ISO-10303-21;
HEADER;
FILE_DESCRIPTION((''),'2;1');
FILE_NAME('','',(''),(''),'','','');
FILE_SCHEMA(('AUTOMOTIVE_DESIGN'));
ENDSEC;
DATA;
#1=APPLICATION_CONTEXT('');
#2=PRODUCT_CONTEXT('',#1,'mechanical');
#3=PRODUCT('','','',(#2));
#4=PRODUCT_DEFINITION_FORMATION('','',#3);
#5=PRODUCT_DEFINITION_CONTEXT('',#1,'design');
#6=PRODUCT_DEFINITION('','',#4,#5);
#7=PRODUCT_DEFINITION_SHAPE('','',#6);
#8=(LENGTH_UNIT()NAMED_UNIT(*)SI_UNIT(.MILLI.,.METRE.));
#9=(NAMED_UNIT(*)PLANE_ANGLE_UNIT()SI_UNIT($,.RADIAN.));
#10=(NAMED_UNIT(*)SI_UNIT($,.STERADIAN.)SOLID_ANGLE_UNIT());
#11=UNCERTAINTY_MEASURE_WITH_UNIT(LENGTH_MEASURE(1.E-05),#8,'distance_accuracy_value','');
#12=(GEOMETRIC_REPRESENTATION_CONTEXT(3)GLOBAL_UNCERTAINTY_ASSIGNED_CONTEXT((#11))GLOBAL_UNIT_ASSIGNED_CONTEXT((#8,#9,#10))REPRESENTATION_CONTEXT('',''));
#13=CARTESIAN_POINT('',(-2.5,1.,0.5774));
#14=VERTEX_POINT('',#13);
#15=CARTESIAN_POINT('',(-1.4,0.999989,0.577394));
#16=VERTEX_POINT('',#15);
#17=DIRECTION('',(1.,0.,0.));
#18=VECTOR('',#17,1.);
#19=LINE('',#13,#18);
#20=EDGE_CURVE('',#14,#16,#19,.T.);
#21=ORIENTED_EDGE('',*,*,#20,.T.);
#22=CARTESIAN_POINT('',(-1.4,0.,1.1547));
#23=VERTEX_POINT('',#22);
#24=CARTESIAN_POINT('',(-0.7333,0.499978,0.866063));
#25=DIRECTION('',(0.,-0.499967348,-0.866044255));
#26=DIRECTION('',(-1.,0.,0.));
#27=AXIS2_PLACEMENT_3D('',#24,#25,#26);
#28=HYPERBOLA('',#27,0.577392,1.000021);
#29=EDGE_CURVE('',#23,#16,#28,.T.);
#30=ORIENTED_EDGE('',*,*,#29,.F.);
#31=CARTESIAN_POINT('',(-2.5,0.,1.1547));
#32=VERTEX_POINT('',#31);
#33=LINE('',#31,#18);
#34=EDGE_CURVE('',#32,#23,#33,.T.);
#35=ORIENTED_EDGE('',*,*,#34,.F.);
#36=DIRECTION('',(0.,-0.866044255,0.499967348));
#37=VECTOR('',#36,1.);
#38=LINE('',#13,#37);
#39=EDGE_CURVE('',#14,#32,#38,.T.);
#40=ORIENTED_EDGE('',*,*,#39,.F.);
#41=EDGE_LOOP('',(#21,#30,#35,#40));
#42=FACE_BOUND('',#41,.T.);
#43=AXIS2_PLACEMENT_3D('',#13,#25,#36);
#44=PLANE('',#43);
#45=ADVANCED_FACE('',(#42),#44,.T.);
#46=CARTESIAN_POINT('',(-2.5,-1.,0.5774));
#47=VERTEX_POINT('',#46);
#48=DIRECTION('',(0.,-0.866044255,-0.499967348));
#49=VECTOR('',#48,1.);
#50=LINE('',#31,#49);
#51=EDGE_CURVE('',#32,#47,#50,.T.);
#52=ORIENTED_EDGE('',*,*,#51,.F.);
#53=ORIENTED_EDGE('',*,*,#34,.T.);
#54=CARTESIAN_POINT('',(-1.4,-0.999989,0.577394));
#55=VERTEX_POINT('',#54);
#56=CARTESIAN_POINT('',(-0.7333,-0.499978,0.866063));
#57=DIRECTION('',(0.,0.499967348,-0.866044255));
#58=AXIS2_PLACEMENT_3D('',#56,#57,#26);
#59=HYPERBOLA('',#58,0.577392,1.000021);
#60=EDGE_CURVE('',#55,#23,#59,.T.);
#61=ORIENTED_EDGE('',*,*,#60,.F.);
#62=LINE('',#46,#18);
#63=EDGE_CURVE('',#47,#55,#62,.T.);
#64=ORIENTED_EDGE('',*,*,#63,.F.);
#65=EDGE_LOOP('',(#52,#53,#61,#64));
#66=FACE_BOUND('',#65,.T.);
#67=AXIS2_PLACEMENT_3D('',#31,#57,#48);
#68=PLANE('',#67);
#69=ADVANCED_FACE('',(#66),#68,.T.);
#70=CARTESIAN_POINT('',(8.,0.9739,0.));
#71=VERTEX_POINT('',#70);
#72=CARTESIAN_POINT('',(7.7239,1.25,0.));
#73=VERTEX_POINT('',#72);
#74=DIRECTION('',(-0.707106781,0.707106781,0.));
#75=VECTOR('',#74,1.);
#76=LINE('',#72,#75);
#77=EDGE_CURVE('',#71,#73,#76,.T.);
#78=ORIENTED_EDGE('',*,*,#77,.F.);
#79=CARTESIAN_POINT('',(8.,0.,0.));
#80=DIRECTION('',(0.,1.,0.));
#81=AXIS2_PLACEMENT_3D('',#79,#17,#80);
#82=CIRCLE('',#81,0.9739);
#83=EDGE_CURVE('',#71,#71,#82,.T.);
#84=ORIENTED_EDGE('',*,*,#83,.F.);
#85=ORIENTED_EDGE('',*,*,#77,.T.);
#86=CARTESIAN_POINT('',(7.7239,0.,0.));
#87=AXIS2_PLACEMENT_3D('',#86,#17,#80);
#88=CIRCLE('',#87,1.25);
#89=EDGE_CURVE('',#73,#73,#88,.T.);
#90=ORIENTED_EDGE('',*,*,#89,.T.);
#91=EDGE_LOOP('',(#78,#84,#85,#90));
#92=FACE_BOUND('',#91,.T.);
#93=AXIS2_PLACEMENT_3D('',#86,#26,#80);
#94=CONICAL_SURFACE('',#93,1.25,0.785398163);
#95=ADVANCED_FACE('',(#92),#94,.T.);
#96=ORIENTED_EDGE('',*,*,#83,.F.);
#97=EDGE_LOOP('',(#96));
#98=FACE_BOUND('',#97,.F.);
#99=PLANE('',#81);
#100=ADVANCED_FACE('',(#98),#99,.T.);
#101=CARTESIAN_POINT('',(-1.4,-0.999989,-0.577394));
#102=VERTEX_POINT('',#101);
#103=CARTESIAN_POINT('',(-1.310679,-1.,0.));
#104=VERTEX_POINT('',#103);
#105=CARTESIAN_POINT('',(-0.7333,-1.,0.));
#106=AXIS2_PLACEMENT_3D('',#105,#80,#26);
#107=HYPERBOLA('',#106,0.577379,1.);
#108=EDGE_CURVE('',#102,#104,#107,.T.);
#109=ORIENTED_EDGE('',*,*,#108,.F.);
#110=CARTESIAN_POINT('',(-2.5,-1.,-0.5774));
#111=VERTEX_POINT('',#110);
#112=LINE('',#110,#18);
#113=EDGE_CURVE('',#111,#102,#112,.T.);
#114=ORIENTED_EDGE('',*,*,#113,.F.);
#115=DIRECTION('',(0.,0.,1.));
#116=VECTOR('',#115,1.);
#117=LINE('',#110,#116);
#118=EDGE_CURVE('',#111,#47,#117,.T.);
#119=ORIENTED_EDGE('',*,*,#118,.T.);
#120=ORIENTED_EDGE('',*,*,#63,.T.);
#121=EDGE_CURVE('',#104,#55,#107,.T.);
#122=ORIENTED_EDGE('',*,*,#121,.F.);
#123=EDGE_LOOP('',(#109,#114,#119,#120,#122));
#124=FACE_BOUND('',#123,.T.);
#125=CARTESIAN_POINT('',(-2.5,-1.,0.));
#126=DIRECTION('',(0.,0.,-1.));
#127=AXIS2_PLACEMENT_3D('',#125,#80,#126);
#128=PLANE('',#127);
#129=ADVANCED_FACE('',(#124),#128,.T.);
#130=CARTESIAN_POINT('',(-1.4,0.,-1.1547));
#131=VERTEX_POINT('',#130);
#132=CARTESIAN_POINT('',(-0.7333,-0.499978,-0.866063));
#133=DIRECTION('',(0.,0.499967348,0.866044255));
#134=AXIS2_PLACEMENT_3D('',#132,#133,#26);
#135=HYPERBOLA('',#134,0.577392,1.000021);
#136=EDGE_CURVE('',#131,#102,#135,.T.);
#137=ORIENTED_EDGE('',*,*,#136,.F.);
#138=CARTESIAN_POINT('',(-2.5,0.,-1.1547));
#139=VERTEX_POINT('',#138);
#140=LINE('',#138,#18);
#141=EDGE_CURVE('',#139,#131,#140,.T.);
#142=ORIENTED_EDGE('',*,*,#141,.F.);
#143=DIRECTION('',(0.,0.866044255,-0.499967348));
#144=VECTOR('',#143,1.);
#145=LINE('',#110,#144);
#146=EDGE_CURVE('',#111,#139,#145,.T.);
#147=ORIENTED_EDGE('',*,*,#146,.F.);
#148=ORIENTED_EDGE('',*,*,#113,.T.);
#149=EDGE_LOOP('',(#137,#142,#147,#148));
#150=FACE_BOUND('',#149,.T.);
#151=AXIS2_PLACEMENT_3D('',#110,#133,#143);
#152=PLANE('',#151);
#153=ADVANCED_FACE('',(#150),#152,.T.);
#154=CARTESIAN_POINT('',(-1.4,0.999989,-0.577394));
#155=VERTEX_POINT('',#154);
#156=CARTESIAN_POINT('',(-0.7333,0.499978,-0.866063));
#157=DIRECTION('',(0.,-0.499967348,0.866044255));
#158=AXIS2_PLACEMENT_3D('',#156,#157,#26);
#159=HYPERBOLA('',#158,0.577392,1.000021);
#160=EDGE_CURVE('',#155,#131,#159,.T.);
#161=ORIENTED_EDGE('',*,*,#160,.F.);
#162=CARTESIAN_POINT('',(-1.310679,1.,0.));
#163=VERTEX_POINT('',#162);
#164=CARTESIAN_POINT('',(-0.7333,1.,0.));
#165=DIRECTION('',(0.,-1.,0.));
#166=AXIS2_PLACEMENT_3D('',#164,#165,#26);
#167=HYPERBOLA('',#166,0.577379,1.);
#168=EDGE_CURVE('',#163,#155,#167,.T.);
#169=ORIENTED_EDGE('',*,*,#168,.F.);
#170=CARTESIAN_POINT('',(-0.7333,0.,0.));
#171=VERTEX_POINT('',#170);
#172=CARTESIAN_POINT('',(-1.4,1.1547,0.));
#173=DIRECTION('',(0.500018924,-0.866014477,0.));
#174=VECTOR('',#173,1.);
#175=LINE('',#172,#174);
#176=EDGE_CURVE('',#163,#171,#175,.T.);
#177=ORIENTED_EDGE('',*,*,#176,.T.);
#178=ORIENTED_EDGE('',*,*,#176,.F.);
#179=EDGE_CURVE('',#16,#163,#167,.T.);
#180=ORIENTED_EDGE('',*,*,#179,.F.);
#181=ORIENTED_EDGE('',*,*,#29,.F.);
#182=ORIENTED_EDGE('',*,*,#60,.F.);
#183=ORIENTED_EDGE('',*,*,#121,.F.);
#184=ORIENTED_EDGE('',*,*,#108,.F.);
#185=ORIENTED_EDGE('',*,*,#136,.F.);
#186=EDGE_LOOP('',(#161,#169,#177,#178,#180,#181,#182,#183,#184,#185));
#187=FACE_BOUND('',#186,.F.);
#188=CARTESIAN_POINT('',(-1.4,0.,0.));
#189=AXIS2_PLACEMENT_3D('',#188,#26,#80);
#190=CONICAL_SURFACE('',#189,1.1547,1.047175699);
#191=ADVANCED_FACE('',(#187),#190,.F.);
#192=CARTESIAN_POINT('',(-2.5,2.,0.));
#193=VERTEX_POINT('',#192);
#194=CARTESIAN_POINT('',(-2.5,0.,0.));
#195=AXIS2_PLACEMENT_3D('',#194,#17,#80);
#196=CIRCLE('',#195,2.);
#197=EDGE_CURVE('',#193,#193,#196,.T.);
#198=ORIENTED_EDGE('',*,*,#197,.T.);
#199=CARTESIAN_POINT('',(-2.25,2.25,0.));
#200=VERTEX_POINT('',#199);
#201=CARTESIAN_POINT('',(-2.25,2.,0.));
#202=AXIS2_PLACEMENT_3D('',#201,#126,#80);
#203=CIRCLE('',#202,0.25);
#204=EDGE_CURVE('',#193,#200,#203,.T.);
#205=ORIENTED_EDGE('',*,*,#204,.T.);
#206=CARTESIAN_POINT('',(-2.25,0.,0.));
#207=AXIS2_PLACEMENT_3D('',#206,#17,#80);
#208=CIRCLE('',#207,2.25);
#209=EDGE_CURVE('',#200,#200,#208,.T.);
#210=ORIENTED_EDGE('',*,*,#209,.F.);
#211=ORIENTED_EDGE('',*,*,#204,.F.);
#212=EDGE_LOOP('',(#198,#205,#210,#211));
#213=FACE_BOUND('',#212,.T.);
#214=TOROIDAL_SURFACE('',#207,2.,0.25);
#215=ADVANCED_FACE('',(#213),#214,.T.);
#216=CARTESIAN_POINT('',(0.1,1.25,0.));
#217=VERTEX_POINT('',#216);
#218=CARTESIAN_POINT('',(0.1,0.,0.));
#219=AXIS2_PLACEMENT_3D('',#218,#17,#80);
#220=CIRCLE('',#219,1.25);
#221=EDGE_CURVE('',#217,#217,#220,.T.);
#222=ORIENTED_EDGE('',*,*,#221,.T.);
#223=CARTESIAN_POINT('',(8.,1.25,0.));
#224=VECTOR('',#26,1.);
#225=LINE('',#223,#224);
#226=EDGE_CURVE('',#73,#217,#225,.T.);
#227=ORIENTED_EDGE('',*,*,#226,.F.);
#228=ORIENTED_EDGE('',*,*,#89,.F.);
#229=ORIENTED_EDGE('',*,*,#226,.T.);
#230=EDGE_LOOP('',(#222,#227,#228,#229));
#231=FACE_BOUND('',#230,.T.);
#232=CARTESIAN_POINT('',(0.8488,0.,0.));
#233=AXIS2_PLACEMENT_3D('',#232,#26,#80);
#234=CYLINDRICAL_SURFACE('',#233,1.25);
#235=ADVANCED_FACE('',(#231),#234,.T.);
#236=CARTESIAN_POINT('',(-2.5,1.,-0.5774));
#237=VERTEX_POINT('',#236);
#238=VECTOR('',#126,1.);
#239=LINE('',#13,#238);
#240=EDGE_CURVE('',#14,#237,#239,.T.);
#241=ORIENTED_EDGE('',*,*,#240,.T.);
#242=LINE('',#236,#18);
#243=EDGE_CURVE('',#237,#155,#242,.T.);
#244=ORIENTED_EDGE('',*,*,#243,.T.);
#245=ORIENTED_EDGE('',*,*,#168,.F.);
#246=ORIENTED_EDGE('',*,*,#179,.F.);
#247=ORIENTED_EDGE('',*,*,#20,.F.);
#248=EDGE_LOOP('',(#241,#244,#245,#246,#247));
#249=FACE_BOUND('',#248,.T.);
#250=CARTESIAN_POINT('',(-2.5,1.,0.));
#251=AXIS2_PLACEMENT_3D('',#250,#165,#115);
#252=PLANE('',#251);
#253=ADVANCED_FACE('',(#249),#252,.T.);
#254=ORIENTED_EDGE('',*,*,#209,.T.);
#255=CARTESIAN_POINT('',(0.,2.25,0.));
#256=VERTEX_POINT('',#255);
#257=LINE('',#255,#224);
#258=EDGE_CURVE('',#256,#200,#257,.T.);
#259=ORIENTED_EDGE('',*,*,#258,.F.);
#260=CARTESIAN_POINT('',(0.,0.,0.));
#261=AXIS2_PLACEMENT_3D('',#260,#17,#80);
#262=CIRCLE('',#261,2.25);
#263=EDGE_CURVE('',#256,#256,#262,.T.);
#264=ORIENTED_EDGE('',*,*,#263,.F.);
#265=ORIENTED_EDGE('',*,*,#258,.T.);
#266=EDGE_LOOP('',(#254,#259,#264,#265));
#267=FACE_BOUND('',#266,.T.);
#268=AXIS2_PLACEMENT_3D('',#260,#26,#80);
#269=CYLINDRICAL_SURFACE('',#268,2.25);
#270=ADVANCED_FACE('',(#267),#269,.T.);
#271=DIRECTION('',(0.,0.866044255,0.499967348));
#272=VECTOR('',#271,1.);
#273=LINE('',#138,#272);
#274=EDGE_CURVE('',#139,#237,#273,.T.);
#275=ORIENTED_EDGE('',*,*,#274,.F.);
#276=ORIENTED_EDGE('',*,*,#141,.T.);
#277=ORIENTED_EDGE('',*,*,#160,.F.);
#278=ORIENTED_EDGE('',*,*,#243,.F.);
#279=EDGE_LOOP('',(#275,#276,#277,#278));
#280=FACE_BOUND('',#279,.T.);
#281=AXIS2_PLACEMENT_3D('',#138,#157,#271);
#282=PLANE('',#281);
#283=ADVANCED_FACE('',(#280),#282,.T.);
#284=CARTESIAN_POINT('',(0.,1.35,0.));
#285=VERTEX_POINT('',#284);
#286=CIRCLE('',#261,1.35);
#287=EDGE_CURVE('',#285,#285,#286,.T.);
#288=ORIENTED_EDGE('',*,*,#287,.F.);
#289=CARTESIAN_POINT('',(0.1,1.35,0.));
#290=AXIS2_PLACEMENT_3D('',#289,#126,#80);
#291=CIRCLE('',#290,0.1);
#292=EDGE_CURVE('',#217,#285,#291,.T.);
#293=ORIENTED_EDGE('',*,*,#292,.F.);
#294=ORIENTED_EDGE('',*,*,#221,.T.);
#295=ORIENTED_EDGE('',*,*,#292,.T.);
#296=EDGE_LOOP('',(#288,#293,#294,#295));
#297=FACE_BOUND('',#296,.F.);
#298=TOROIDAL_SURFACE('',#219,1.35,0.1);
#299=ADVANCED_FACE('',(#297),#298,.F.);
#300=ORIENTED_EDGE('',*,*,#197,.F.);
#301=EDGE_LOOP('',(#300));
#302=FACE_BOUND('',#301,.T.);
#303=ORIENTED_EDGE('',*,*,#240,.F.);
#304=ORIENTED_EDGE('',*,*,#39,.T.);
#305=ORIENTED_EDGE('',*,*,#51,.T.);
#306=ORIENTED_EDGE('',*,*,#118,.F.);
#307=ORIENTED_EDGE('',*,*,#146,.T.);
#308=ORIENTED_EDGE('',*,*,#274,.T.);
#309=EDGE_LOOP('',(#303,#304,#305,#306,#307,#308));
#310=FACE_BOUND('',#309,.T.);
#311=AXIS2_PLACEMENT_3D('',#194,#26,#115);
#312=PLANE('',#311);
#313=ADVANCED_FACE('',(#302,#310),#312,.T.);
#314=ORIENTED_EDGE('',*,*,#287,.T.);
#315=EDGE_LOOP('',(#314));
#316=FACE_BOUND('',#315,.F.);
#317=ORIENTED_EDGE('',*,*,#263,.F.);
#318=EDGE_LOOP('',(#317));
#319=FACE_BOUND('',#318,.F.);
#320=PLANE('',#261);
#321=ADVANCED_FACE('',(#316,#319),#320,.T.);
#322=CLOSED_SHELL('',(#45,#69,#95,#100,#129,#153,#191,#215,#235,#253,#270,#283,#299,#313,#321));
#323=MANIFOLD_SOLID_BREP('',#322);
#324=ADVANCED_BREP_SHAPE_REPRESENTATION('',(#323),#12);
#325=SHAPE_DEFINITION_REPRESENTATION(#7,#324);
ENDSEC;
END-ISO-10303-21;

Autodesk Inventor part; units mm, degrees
ref_plane "YZ Plane" through (0, 0, 0) normal (1, 0, 0) x (0, 1, 0)
ref_plane "XZ Plane" through (0, 0, 0) normal (0, 1, 0) x (-1, 0, 0)
sketch "Sketch1" plane through (0, 0, 0) normal (0, 0, 1) x (1, 0, 0)
  line L0 (-0.7333, 0) -> (8, 0)
  line L1 (8, 0) -> (8, 1.25)
  line L2 (8, 1.25) -> (1.125, 1.25)
  line L3 (1.125, 1.25) -> (0.8488, 1.25)
  line L4 (0.8488, 1.25) -> (0, 1.25)
  line L5 (0, 1.25) -> (0, 2.25)
  line L6 (0, 2.25) -> (-2.5, 2.25)
  line L7 (-2.5, 2.25) -> (-2.5, 1.1547)
  line L8 (-2.5, 1.1547) -> (-1.4, 1.1547)
  line L9 (-1.4, 1.1547) -> (-0.7333, 0)
  line L10 (-4.6, 0) -> (10.1, 0) projected
  line L11 (0, -0.45) -> (0, 2.7) projected
  line L12 (1.125, 1.25) -> (0, 1.25) construction
  dimension "d1" = 6.875
  dimension "d2" = 0.2762
  dimension "d3" = 2.5
  dimension "d4" = 1.1
  dimension "d5" = 60
  dimension "d6" = 2.5
  dimension "d7" = 2.5
  dimension "d8" = 2.3094
  dimension "d9" = 4.5
  dimension "d26" = 8
revolve "Body" add sketch "Sketch1" angle 360 about axis through (-0.7333, 0, 0) along (1, 0, 0)
sketch "Sketch2" plane through (-2.5, 0, 0) normal (-1, 0, 0) x (0, 0, 1)
  circle A0 centre (0, 0) radius 1.1547 projected
  line L0 (0, -3.15) -> (0, 3.15) projected
  line L1 (-3.15, 0) -> (3.15, 0) projected
  line L2 (1.1547, 0) -> (0.5774, -1)
  line L3 (0.5774, -1) -> (-0.5774, -1)
  line L4 (-0.5774, -1) -> (-1.1547, 0)
  line L5 (-1.1547, 0) -> (-0.5774, 1)
  line L6 (-0.5774, 1) -> (0.5774, 1)
  line L7 (0.5774, 1) -> (1.1547, 0)
extrude "Slot" add sketch "Sketch2" against normal up to next contours L7 A0 | A0 L2 | L6 L0 A0 | A0 L0 L3 | L0 L6 A0 | A0 L3 L0 | L4 A0 | A0 L5
fillet "Fillet1" radius 0.25 1 edges at (-2.5, -2.25, 0)
thread "Thread" size "M2.5x0.45" class "6g" standard "ISO Metric profile" length 6.875
chamfer "Chamfer1" distance 0.2761 distance2 0.2761 1 edges at (8, -1.25, 0) measured on face at (8, 0.4797, 0.7189)
ref_plane "Work Plane1" through (29, 0, 0) normal (0, -1, 0) x (1, 0, 0)
fillet "Fillet2" radius 0.1 1 edges at (0, -1.25, 0)
equation "\"d30\" = R"
equation "\"d17\" = RR"
equation "\"d13\" = GEL"
equation "\"d15\" = -0.5 * SPD + 0.5 * GD"
equation "\"d16\" = GUL"
equation "\"d1\" = GEL"
equation "\"d3\" = KOH"
equation "\"d4\" = INTI"
equation "\"d6\" = GD"
equation "\"d7\" = BDM"
equation "\"d8\" = 1.1547 * SW"
equation "\"d9\" = KOD"
equation "\"d26\" = NLG"
equation "\"GD\" = 2.5"
equation "\"NLG\" = 8"
equation "\"GEL\" = 6.875"
equation "\"KOD\" = 4.5"
equation "\"KOH\" = 2.5"
equation "\"INTI\" = 1.1"
equation "\"GAL\" = 0.61345 * PTC"
equation "\"GUL\" = 0.61345 * PTC"
equation "\"BDM\" = NND"
equation "\"SW\" = 2"
equation "\"RR\" = 0.25"
equation "\"SPD\" = NND - 1.2269 * PTC"
equation "\"R\" = 0.1"
equation "\"TOA\" = 30deg"
equation "\"GD1\" = THREADDIA - 1.2269 * PTC"
equation "\"THREADDIA\" = 2.5"
equation "\"FAWI\" = 45deg"
equation "\"PTC\" = 0.45"
equation "\"NND\" = 2.5"
equation "\"E0\" = 1.155 * SW"
properties part number "ISO 4762 - M2.5 x 8" material "Stainless Steel, 440C"
